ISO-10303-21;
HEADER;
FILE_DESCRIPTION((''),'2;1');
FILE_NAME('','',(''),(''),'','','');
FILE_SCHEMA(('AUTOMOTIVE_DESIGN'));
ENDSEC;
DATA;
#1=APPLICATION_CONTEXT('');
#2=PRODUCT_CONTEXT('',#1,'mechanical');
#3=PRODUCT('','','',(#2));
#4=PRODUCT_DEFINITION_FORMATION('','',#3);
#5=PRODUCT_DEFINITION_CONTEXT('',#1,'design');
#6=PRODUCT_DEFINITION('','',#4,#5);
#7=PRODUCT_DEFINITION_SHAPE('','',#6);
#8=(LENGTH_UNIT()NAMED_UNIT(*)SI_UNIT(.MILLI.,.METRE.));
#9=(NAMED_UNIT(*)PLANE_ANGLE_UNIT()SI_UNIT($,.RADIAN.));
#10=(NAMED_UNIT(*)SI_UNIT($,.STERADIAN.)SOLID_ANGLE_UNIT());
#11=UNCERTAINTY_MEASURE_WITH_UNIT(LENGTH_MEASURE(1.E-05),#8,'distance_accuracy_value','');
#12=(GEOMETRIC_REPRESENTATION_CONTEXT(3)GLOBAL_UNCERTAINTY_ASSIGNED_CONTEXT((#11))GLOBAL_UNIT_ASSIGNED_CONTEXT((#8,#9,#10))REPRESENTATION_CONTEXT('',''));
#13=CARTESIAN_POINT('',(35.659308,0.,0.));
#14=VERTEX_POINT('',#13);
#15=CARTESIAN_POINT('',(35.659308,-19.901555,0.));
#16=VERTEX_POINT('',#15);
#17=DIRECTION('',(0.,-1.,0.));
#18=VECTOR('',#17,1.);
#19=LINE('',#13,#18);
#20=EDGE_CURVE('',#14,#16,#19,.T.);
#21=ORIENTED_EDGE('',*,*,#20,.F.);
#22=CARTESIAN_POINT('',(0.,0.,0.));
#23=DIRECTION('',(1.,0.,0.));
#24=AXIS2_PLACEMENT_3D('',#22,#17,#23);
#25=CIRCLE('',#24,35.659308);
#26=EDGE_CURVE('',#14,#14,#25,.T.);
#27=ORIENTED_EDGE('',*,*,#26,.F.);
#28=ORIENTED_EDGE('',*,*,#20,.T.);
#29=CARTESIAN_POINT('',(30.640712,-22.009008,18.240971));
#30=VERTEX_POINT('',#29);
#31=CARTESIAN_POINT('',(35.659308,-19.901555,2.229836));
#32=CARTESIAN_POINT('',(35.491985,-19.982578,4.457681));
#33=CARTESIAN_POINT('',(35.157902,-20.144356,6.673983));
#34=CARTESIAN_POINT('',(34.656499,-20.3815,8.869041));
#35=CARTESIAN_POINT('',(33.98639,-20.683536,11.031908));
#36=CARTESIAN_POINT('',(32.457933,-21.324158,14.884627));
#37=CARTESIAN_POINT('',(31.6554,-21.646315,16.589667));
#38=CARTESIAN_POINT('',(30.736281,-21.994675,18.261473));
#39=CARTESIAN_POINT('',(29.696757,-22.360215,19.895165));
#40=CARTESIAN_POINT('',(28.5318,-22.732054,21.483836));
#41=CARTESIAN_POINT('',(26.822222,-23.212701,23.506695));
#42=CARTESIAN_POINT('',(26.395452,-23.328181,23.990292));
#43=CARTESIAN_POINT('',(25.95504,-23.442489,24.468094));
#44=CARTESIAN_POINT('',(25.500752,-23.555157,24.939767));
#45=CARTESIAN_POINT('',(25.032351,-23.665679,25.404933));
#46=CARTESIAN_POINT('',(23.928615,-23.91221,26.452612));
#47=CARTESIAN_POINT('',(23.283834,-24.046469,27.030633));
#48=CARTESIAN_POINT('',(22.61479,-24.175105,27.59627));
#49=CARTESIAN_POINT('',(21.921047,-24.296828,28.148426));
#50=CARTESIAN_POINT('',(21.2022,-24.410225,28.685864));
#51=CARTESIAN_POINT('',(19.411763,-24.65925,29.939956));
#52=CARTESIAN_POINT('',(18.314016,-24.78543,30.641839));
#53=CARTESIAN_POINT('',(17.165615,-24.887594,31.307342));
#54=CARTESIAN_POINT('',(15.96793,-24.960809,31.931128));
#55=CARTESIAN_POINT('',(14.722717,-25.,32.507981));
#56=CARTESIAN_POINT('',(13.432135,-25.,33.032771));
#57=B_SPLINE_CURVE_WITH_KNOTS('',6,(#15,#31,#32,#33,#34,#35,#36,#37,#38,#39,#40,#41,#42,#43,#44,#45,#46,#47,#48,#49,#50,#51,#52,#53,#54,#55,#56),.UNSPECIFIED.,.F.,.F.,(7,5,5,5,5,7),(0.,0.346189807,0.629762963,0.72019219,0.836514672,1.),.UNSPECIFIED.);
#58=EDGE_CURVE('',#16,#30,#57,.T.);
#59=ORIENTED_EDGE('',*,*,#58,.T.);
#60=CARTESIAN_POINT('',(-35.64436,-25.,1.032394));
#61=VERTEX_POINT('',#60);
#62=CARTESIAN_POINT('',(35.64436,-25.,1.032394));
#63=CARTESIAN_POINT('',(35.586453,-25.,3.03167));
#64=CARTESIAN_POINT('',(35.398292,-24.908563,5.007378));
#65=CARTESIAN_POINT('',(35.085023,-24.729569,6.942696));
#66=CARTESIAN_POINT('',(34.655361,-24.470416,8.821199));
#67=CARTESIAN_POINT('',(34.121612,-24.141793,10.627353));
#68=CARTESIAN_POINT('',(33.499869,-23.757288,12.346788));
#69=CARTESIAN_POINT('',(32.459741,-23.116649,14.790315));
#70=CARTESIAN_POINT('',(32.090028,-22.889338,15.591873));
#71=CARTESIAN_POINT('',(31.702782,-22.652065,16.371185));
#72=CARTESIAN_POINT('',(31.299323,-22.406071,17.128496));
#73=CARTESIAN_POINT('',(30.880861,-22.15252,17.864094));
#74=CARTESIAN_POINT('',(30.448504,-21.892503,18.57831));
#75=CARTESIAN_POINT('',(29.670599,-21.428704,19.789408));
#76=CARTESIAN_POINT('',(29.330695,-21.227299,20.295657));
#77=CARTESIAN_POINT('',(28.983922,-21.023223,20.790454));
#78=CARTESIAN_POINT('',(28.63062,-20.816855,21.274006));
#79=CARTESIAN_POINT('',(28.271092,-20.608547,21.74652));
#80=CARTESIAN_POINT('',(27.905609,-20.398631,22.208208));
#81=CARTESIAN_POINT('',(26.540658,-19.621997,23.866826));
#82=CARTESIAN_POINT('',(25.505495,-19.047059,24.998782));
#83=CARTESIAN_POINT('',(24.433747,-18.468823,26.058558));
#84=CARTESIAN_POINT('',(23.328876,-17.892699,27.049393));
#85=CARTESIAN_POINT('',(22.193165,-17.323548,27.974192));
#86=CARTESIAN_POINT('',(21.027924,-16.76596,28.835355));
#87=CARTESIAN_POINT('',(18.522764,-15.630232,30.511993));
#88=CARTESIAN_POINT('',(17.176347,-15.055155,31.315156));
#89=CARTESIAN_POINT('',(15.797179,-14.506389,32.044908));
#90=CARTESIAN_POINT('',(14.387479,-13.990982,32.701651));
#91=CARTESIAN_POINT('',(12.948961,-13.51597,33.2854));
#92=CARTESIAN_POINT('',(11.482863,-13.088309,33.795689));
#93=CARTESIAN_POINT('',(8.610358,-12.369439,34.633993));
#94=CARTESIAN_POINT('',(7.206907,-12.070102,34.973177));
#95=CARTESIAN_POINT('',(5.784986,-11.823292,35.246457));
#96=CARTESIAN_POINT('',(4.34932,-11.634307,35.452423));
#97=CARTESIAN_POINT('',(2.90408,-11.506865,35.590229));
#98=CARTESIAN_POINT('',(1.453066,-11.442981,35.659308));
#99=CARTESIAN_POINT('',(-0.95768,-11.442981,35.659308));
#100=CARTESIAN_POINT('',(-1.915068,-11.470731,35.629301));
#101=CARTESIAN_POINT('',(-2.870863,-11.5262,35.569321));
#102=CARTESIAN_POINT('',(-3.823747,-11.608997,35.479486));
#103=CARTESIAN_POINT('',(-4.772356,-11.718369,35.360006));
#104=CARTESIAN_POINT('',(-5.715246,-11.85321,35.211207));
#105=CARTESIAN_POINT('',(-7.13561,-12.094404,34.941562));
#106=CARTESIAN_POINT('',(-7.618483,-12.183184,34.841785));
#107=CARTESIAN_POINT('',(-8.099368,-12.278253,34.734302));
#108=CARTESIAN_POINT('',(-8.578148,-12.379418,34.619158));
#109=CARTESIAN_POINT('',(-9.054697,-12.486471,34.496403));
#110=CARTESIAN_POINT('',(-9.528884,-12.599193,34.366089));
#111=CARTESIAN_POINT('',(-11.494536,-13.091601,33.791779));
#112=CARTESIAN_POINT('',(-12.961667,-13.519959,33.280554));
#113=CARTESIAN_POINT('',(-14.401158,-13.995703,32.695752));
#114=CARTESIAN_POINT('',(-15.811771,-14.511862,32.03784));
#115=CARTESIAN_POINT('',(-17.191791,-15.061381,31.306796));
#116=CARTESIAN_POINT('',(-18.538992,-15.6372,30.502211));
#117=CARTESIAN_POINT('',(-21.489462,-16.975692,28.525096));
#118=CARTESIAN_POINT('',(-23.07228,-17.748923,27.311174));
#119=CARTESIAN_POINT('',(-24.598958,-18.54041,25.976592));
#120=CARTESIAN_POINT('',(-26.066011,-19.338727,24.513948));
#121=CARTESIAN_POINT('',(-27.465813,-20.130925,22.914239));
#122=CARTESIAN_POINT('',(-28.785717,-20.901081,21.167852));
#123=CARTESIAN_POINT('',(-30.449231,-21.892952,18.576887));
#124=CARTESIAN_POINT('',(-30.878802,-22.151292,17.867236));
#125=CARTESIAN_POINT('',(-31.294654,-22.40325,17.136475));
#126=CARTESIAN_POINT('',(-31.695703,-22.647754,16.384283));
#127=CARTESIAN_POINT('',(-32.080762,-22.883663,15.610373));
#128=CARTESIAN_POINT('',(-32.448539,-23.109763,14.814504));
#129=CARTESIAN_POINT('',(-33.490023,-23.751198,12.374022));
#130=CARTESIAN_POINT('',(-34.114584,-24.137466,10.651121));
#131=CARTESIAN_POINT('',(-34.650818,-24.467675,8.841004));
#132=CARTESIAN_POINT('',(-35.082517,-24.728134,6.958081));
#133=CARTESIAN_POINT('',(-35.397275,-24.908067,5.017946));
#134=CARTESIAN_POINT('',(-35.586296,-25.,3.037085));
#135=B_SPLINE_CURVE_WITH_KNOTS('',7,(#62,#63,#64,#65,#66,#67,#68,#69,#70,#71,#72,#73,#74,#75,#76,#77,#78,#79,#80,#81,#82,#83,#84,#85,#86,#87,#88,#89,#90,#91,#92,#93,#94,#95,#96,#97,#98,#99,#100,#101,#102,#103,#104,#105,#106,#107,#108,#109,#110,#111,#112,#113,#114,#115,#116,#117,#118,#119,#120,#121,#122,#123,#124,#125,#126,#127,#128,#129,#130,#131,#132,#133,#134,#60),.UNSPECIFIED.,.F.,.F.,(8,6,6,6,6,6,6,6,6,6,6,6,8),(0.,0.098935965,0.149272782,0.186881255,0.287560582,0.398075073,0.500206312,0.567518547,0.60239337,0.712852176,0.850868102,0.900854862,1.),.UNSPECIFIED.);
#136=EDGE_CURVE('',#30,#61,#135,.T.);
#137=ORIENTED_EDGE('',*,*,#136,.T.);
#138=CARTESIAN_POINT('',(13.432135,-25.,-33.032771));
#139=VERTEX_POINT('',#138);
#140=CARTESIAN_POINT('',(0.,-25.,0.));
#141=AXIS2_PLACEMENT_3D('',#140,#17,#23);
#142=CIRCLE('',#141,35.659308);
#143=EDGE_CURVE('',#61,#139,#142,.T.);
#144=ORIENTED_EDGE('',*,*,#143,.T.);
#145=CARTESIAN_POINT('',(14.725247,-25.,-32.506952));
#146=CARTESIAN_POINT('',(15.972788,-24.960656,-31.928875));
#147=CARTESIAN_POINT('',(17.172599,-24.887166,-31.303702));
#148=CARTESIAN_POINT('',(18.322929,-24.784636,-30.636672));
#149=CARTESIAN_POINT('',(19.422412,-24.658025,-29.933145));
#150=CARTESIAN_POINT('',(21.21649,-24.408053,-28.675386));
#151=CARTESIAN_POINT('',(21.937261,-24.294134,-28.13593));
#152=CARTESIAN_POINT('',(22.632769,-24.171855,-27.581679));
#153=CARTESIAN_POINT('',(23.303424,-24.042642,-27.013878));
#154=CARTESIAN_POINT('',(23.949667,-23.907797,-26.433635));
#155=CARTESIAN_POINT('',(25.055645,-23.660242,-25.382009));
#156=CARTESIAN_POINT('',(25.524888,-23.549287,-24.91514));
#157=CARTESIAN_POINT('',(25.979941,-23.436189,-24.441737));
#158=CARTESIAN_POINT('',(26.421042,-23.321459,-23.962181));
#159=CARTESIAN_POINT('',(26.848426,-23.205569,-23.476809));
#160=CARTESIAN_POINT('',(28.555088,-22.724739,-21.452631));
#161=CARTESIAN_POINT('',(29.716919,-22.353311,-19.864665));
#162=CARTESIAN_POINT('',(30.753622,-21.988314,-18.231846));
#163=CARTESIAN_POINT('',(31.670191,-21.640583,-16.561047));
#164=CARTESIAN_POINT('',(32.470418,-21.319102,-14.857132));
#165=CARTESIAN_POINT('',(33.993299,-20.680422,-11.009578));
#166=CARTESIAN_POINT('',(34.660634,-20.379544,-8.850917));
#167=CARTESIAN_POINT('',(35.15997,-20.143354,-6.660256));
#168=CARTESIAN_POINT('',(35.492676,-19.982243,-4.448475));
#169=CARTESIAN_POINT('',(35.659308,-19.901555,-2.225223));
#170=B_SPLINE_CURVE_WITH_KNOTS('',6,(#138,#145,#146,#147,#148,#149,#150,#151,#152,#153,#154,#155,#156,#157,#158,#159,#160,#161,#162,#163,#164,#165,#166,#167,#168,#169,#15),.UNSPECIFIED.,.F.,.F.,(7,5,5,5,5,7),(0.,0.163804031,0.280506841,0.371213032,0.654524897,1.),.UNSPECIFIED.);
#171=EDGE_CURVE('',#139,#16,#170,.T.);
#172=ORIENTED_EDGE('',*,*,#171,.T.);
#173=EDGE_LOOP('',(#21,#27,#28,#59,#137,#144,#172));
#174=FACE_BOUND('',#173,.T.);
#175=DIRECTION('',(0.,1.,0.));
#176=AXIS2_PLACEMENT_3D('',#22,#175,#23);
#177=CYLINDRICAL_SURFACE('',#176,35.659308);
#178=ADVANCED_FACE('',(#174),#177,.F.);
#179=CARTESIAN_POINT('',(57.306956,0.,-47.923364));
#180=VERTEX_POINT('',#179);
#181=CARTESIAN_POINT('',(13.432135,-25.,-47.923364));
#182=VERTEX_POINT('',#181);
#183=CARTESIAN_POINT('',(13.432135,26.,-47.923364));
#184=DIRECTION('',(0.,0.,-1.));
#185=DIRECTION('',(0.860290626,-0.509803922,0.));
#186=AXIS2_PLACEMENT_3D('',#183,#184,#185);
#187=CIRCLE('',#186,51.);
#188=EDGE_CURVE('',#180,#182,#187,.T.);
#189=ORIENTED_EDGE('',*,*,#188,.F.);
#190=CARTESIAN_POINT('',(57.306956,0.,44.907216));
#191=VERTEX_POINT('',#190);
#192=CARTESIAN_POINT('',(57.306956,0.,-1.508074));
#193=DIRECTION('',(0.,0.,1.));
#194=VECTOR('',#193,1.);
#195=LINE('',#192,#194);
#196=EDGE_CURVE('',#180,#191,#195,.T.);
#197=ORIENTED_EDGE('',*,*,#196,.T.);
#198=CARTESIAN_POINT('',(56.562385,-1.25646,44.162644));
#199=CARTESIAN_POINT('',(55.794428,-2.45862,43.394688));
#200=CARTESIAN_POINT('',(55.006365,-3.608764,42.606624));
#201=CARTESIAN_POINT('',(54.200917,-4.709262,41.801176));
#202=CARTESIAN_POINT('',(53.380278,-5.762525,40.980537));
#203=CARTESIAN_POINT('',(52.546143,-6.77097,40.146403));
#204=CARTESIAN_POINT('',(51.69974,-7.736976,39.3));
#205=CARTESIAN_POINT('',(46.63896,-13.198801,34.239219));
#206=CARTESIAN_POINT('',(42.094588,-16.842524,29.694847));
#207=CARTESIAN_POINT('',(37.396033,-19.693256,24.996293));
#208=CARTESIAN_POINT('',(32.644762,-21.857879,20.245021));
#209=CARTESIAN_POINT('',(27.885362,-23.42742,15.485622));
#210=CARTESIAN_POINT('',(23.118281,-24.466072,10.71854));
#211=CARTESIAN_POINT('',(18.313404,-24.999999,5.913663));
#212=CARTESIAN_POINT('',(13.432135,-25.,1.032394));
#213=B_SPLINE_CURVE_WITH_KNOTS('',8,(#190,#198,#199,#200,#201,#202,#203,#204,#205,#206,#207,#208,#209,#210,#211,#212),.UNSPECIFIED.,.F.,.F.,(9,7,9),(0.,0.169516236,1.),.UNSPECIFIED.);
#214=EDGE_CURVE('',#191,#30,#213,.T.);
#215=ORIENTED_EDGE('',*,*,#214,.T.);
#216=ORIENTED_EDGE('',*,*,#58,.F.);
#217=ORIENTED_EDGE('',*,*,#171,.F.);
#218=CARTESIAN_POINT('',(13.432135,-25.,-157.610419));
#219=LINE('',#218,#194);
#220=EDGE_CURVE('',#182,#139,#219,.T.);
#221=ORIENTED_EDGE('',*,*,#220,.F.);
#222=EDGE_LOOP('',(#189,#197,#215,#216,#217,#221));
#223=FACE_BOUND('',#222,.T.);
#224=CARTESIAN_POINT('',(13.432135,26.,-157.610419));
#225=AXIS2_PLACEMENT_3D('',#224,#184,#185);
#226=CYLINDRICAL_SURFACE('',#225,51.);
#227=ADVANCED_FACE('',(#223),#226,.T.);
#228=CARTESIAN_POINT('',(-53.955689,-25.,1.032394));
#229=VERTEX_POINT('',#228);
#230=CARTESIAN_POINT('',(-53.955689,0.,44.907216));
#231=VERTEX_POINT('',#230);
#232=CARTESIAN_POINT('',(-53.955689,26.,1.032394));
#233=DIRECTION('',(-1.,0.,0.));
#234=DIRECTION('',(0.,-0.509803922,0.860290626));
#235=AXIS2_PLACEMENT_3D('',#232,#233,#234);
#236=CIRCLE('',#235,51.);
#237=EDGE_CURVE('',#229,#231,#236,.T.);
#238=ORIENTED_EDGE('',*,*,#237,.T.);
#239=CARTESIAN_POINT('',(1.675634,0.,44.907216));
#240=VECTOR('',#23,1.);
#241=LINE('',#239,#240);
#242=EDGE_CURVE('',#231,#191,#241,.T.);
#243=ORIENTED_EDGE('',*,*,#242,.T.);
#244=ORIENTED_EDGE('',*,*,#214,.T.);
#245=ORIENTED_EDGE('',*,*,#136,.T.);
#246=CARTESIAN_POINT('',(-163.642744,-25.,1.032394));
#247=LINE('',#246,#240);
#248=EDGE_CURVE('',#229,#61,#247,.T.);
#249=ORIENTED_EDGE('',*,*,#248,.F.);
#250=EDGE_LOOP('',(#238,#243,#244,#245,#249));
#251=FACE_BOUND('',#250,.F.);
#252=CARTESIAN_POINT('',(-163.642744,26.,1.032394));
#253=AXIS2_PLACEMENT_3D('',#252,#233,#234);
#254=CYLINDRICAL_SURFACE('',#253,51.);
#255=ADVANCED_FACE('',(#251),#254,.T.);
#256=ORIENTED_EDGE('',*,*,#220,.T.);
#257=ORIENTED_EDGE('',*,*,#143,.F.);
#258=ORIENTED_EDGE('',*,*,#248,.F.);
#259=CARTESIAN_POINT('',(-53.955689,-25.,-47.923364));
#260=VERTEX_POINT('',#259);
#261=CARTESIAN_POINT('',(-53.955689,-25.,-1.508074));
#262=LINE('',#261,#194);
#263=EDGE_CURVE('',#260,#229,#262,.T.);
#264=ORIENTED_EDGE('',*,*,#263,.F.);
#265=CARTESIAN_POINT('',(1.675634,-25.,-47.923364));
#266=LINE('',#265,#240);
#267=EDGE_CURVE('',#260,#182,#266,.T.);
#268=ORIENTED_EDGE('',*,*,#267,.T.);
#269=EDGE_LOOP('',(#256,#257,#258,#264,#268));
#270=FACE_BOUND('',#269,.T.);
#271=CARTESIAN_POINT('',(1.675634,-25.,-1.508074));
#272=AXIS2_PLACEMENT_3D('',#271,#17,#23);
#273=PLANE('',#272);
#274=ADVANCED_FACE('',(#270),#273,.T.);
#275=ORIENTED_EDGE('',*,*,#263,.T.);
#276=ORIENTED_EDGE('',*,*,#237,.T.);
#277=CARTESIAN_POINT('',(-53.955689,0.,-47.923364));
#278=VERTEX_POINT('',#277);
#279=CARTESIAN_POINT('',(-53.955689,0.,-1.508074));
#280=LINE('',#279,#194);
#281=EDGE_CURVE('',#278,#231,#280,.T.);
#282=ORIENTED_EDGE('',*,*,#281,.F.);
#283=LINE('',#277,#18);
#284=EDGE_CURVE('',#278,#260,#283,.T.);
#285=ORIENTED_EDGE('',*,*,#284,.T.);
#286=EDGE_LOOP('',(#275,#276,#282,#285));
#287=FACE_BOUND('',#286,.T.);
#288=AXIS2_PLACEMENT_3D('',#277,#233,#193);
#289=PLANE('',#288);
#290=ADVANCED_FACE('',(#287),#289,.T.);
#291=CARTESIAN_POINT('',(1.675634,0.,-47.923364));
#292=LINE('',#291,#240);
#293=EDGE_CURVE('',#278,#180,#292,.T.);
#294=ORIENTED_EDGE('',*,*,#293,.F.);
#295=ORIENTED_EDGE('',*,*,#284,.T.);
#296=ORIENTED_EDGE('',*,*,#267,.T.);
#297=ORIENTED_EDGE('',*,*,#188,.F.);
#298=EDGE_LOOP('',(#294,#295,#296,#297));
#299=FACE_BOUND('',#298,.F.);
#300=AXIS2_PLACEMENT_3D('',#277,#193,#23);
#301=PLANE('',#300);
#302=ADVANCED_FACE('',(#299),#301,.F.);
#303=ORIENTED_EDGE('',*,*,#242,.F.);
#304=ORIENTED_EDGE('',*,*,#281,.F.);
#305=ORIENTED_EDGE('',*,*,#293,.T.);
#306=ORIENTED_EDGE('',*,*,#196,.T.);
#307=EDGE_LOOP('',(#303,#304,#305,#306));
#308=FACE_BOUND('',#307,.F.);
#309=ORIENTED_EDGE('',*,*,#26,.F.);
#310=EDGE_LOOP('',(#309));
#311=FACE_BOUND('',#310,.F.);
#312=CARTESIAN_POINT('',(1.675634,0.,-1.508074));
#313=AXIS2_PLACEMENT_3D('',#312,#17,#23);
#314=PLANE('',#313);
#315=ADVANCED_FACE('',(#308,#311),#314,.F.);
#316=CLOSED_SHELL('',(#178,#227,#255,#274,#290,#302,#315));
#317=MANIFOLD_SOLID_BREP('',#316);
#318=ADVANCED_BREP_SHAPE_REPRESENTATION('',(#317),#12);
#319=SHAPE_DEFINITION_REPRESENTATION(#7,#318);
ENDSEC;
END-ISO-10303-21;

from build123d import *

# Parameters (mm, degrees)
F0_W        = 111.2626455724
F0_H        = 92.8305797279
F0_R        = 35.6593077027
F1_DEPTH    = 25
F2_T1_DEPTH = 312.2046894127
F2_T3_DEPTH = 330.6367552572


# Not quite as in the source:
# - a fillet or chamfer that OpenCascade refuses, or shapes differently, is made with other operations: its cross-section is extruded or revolved along the edge and cut away or added


with BuildPart() as f1:
    # F0 (on Front) → F1 (new body)
    with BuildSketch(Plane.XZ):
        with Locations((1.6756337136, -1.5080738813)):
            Rectangle(F0_W, F0_H)
        Circle(F0_R, mode=Mode.SUBTRACT)
    extrude(amount=F1_DEPTH)

    # F2: fillet of radius 51 on 2 edges, made by hand

    # F2_s2 → F2_t1 (cut)
    with BuildSketch(Plane.XY.offset(-157.6104185876)):
        with BuildLine():
            ThreePointArc((57.3069564998, 0), (38.6808969088, -18.3113980822), (13.4321345628, -25))
            Line((13.4321345628, -25), (57.3069564998, -25))
            Line((57.3069564998, -25), (57.3069564998, 0))
        make_face()
    extrude(amount=F2_T1_DEPTH, mode=Mode.SUBTRACT)

    # F2_s4 → F2_t3 (cut)
    with BuildSketch(Plane.YZ.offset(-163.642743915)):
        with BuildLine():
            ThreePointArc((0, 44.9072159827), (-18.3113980822, 26.2811563916), (-25, 1.0323940457))
            Line((-25, 1.0323940457), (-25, 44.9072159827))
            Line((-25, 44.9072159827), (0, 44.9072159827))
        make_face()
    extrude(amount=F2_T3_DEPTH, mode=Mode.SUBTRACT)


solid = f1.part
